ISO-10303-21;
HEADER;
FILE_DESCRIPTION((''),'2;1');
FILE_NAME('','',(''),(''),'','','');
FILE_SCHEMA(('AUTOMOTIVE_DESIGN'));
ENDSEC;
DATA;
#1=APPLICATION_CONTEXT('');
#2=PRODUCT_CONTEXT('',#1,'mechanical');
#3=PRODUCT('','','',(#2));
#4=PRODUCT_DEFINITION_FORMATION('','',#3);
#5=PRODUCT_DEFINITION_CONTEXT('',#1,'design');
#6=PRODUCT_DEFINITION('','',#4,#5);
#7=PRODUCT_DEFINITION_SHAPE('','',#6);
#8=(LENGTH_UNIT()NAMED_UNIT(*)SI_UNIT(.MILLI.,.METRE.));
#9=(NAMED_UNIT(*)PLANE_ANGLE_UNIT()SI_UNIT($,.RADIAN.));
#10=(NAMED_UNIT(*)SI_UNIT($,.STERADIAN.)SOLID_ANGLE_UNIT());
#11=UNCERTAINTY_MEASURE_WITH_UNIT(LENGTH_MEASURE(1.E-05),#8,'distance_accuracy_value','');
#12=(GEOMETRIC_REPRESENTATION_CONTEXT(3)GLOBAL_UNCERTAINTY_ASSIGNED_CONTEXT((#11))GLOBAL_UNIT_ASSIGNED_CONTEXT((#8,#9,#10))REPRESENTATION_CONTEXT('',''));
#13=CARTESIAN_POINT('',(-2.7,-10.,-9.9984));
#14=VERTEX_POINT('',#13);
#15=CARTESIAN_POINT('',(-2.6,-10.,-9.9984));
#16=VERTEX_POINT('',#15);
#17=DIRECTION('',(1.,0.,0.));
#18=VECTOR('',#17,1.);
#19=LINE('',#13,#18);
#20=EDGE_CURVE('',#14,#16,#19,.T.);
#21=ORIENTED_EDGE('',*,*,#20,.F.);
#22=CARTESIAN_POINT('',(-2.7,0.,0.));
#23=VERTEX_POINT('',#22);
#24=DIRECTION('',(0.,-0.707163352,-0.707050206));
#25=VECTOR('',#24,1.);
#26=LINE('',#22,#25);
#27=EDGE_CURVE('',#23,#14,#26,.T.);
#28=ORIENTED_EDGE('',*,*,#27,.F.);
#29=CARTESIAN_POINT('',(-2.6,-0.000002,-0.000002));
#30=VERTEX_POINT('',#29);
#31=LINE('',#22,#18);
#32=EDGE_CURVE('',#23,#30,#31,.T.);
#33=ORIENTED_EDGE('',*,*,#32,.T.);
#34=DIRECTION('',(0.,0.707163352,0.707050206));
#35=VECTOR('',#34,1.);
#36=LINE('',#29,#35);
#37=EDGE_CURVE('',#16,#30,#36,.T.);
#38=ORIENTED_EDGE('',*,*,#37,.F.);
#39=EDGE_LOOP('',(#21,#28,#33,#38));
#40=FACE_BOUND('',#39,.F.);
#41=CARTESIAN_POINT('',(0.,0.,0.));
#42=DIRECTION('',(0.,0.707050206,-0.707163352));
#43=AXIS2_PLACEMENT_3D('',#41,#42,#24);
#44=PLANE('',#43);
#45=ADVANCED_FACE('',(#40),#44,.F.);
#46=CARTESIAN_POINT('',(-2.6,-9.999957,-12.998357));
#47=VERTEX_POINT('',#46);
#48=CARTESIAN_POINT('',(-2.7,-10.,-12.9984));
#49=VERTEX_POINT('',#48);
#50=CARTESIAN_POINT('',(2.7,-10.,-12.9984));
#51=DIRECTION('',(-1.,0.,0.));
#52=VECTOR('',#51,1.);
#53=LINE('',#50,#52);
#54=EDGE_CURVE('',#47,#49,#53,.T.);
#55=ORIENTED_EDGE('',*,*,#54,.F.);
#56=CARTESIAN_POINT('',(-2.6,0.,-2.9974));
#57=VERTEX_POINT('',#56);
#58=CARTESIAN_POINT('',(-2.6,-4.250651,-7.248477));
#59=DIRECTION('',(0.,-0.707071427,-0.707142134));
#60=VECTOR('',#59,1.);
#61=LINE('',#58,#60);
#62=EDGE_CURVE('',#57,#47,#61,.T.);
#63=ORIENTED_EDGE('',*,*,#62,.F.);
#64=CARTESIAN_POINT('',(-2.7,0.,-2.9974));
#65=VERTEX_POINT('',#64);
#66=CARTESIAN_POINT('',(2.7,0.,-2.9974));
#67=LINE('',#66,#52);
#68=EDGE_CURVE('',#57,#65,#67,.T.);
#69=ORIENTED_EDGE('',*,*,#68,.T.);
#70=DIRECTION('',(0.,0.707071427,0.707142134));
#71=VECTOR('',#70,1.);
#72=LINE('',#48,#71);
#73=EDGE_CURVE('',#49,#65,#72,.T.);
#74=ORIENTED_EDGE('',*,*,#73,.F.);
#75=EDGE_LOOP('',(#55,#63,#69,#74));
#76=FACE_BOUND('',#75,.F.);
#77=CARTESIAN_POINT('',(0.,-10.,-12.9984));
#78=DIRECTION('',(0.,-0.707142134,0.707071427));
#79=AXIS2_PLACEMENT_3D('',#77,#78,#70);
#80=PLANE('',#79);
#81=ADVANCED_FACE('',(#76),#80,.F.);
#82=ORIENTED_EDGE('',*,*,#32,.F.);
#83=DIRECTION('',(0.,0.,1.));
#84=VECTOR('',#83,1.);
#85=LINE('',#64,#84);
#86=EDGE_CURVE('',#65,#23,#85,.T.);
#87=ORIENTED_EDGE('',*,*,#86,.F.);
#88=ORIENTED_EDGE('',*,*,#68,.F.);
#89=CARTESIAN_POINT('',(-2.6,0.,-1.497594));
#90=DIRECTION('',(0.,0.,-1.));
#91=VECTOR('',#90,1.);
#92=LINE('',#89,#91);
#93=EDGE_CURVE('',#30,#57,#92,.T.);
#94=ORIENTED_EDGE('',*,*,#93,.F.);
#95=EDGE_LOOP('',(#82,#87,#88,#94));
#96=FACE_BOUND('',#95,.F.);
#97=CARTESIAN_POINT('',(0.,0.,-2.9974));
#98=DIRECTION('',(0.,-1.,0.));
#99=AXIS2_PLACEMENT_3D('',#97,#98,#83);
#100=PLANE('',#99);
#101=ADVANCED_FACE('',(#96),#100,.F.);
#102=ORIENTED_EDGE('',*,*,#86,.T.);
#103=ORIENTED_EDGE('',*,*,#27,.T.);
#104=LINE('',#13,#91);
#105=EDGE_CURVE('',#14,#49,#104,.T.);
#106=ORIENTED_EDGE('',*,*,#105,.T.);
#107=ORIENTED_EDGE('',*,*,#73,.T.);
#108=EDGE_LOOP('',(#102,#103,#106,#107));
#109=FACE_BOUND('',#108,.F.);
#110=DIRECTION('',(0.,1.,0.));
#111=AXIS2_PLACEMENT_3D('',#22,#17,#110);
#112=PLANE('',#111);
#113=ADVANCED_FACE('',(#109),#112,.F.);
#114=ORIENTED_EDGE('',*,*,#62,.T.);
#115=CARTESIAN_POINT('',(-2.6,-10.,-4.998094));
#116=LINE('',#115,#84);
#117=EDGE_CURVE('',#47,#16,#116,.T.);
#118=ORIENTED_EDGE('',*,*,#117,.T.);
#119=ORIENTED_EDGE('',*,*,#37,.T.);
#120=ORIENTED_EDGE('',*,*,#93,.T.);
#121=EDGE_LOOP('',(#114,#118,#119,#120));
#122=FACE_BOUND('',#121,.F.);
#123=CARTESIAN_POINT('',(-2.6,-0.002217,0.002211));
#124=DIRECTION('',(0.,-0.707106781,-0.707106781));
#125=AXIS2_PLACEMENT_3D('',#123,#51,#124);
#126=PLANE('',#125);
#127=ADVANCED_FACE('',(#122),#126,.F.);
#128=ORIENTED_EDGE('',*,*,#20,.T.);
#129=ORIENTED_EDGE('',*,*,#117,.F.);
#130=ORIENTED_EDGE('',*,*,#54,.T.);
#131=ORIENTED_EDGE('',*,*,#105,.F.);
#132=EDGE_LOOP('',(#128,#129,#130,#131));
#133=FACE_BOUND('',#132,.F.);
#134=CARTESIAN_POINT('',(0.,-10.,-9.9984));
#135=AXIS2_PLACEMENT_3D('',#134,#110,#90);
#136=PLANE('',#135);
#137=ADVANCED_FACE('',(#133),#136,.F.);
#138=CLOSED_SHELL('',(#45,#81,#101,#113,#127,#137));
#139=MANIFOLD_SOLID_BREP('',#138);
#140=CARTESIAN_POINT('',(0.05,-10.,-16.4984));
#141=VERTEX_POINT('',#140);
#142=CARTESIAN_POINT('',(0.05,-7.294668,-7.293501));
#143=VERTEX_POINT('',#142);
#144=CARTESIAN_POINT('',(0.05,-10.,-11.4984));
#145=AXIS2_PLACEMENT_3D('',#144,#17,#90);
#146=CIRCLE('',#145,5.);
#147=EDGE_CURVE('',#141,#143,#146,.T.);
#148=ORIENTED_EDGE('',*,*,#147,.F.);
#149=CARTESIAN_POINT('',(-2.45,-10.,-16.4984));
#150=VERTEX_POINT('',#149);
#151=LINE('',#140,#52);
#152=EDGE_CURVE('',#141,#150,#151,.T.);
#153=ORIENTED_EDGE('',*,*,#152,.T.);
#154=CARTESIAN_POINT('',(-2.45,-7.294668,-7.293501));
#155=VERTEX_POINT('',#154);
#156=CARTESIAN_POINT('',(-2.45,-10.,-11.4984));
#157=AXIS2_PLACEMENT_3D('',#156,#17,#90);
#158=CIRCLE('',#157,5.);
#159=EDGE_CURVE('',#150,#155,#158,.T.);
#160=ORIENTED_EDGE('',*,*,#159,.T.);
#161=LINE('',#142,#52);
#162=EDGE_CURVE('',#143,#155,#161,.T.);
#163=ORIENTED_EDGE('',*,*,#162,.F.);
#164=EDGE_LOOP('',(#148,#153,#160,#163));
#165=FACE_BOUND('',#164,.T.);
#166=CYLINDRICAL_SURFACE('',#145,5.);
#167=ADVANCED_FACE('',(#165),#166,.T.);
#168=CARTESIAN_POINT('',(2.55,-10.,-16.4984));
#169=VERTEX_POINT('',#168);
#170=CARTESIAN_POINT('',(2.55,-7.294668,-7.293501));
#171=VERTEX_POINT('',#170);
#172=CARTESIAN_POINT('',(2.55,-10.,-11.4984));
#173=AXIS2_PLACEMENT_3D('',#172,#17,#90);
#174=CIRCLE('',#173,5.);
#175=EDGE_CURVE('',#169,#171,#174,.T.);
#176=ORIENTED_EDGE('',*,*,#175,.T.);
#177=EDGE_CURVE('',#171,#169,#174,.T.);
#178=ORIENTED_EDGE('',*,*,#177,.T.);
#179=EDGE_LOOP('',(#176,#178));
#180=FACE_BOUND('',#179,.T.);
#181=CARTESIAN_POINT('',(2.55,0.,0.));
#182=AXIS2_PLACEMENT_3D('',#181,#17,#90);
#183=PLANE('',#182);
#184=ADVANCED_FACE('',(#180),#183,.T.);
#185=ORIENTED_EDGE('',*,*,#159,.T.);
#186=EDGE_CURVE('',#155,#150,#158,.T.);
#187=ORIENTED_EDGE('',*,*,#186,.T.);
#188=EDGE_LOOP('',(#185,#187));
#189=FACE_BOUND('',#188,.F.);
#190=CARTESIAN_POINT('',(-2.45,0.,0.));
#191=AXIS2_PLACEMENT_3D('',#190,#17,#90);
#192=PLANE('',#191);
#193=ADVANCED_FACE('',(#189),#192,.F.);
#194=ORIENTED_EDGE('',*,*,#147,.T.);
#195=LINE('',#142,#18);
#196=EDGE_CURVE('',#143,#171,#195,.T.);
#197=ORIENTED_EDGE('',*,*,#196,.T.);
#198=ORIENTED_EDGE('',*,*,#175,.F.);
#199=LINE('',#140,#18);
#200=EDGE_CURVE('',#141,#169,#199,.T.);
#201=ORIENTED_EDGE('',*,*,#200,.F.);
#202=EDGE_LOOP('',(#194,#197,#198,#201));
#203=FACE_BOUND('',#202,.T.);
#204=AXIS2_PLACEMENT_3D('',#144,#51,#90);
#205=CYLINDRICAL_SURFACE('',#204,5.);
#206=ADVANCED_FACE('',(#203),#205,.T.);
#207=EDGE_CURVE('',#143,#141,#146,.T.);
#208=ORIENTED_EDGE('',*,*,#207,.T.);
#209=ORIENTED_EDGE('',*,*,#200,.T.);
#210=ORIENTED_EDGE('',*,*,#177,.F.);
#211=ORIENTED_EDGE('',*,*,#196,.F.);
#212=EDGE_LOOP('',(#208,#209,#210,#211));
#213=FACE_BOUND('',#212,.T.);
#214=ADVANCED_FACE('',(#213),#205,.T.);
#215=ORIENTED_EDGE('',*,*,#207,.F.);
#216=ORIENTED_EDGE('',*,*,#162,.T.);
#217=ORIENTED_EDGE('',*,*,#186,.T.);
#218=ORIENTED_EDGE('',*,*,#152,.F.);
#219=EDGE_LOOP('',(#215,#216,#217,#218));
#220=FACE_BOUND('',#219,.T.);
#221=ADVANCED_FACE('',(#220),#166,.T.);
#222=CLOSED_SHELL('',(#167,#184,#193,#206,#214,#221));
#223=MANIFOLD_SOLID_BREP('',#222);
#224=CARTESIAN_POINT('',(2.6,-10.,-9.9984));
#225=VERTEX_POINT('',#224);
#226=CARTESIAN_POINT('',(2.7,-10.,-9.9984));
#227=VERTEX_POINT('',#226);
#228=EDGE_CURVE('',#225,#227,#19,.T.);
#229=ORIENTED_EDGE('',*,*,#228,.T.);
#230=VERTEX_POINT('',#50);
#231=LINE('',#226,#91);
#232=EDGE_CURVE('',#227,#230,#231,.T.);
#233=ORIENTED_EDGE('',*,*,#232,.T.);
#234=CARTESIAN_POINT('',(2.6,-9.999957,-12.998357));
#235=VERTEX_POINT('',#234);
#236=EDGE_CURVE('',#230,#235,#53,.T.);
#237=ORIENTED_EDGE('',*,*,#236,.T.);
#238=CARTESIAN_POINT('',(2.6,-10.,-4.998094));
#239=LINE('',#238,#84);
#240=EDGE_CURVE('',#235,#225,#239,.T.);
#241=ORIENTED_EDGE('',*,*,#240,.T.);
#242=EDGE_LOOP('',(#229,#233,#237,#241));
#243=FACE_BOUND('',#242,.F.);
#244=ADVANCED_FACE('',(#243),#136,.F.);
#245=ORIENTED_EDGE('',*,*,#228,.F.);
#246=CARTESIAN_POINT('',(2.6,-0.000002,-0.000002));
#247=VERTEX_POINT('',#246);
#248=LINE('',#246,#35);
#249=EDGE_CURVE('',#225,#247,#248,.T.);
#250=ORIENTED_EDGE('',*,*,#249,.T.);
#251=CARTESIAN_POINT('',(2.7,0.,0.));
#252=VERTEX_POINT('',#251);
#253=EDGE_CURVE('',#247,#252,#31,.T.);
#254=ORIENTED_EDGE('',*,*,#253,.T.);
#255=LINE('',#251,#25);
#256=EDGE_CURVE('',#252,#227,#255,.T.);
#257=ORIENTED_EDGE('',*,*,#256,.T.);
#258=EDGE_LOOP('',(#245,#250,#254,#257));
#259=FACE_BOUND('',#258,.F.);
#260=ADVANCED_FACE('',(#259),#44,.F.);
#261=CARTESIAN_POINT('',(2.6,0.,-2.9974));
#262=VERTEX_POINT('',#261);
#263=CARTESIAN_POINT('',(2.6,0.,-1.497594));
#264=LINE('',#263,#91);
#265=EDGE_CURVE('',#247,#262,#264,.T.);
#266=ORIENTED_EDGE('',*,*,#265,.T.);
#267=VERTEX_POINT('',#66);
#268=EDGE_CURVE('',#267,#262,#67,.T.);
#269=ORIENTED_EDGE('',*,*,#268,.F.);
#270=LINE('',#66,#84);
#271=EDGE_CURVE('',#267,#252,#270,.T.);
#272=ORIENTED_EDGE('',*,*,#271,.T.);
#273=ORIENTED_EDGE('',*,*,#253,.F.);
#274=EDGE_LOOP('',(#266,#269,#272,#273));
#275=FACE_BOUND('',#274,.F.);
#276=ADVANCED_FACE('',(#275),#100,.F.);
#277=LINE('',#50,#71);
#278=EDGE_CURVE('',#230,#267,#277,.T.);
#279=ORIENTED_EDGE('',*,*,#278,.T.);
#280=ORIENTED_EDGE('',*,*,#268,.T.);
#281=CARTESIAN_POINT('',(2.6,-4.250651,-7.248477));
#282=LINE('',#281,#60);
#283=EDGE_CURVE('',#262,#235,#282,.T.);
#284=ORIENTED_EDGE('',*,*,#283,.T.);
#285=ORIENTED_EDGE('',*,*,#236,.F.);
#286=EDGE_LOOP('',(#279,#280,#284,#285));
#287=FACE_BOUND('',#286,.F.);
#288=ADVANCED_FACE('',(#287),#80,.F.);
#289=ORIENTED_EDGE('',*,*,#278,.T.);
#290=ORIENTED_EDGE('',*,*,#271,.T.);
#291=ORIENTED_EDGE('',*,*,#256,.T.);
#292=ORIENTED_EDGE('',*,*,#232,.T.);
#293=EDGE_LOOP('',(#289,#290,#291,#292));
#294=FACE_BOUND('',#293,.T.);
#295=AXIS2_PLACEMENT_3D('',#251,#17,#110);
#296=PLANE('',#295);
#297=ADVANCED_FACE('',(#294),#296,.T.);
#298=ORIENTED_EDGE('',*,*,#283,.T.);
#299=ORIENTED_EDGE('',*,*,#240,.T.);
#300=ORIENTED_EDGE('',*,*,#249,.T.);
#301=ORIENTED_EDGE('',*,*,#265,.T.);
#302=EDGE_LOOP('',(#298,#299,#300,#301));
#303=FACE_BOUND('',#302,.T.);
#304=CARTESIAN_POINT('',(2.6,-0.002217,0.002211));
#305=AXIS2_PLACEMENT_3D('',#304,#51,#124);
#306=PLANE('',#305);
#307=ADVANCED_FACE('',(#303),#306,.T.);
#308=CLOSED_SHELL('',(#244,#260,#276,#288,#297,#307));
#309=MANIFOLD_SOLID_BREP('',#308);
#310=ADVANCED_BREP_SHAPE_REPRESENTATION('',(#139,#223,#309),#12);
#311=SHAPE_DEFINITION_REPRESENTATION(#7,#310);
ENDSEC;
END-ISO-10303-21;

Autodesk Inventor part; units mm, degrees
ref_plane "YZ Plane" through (0, 0, 0) normal (1, 0, 0) x (0, 1, 0)
ref_plane "XZ Plane" through (0, 0, 0) normal (0, 1, 0) x (-1, 0, 0)
ref_plane "XY Plane" through (0, 0, 0) normal (0, 0, 1) x (1, 0, 0)
sketch "Esboço1" plane through (0, 0, 0) normal (1, 0, 0) x (0, 1, 0)
  line L0 (0, 0) -> (-10, -9.9984)
  line L1 (-10, -9.9984) -> (-10, -12.9984)
  line L2 (-10, -12.9984) -> (0, -2.9974)
  line L3 (0, -2.9974) -> (0, 0)
  dimension "d5" = 3
extrude "Extrusão1" add sketch "Esboço1" along normal mid plane 5.4
sketch "Esboço2" plane through (-2.7, -10, -9.9984) normal (0, -0.7070505, 0.7071631) x (1, 0, 0)
  line L0 (0, 14.141) -> (0, 12.0217) projected
  line L1 (0.1, 14.141) -> (0.1, -2.1212)
  line L2 (5.3, 14.141) -> (5.3, -2.1212)
  line L3 (5.3, -2.1212) -> (0.1, -2.1212)
  line L4 (0.1, 14.141) -> (5.3, 14.141)
  point P0 (2.7, 14.141)
  point P1 (5.4, 14.141)
extrude "Extrusão2" cut sketch "Esboço2" against normal blind 5.4
ref_plane "Plano de trabalho1" through (0.05, 0, 0) normal (1, 0, 0) x (0, 0, -1)
sketch "Esboço3" plane through (0.05, 0, 0) normal (1, 0, 0) x (0, 0, -1)
  line L0 (0, 0) -> (9.9984, -10) projected
  line L1 (9.9984, -10) -> (12.9984, -10) projected
  circle A0 centre (11.4984, -10) radius 5
  dimension "d14" = 10
extrude "Extrusão3" add sketch "Esboço3" along normal mid plane 5
properties part number "RodaP"
